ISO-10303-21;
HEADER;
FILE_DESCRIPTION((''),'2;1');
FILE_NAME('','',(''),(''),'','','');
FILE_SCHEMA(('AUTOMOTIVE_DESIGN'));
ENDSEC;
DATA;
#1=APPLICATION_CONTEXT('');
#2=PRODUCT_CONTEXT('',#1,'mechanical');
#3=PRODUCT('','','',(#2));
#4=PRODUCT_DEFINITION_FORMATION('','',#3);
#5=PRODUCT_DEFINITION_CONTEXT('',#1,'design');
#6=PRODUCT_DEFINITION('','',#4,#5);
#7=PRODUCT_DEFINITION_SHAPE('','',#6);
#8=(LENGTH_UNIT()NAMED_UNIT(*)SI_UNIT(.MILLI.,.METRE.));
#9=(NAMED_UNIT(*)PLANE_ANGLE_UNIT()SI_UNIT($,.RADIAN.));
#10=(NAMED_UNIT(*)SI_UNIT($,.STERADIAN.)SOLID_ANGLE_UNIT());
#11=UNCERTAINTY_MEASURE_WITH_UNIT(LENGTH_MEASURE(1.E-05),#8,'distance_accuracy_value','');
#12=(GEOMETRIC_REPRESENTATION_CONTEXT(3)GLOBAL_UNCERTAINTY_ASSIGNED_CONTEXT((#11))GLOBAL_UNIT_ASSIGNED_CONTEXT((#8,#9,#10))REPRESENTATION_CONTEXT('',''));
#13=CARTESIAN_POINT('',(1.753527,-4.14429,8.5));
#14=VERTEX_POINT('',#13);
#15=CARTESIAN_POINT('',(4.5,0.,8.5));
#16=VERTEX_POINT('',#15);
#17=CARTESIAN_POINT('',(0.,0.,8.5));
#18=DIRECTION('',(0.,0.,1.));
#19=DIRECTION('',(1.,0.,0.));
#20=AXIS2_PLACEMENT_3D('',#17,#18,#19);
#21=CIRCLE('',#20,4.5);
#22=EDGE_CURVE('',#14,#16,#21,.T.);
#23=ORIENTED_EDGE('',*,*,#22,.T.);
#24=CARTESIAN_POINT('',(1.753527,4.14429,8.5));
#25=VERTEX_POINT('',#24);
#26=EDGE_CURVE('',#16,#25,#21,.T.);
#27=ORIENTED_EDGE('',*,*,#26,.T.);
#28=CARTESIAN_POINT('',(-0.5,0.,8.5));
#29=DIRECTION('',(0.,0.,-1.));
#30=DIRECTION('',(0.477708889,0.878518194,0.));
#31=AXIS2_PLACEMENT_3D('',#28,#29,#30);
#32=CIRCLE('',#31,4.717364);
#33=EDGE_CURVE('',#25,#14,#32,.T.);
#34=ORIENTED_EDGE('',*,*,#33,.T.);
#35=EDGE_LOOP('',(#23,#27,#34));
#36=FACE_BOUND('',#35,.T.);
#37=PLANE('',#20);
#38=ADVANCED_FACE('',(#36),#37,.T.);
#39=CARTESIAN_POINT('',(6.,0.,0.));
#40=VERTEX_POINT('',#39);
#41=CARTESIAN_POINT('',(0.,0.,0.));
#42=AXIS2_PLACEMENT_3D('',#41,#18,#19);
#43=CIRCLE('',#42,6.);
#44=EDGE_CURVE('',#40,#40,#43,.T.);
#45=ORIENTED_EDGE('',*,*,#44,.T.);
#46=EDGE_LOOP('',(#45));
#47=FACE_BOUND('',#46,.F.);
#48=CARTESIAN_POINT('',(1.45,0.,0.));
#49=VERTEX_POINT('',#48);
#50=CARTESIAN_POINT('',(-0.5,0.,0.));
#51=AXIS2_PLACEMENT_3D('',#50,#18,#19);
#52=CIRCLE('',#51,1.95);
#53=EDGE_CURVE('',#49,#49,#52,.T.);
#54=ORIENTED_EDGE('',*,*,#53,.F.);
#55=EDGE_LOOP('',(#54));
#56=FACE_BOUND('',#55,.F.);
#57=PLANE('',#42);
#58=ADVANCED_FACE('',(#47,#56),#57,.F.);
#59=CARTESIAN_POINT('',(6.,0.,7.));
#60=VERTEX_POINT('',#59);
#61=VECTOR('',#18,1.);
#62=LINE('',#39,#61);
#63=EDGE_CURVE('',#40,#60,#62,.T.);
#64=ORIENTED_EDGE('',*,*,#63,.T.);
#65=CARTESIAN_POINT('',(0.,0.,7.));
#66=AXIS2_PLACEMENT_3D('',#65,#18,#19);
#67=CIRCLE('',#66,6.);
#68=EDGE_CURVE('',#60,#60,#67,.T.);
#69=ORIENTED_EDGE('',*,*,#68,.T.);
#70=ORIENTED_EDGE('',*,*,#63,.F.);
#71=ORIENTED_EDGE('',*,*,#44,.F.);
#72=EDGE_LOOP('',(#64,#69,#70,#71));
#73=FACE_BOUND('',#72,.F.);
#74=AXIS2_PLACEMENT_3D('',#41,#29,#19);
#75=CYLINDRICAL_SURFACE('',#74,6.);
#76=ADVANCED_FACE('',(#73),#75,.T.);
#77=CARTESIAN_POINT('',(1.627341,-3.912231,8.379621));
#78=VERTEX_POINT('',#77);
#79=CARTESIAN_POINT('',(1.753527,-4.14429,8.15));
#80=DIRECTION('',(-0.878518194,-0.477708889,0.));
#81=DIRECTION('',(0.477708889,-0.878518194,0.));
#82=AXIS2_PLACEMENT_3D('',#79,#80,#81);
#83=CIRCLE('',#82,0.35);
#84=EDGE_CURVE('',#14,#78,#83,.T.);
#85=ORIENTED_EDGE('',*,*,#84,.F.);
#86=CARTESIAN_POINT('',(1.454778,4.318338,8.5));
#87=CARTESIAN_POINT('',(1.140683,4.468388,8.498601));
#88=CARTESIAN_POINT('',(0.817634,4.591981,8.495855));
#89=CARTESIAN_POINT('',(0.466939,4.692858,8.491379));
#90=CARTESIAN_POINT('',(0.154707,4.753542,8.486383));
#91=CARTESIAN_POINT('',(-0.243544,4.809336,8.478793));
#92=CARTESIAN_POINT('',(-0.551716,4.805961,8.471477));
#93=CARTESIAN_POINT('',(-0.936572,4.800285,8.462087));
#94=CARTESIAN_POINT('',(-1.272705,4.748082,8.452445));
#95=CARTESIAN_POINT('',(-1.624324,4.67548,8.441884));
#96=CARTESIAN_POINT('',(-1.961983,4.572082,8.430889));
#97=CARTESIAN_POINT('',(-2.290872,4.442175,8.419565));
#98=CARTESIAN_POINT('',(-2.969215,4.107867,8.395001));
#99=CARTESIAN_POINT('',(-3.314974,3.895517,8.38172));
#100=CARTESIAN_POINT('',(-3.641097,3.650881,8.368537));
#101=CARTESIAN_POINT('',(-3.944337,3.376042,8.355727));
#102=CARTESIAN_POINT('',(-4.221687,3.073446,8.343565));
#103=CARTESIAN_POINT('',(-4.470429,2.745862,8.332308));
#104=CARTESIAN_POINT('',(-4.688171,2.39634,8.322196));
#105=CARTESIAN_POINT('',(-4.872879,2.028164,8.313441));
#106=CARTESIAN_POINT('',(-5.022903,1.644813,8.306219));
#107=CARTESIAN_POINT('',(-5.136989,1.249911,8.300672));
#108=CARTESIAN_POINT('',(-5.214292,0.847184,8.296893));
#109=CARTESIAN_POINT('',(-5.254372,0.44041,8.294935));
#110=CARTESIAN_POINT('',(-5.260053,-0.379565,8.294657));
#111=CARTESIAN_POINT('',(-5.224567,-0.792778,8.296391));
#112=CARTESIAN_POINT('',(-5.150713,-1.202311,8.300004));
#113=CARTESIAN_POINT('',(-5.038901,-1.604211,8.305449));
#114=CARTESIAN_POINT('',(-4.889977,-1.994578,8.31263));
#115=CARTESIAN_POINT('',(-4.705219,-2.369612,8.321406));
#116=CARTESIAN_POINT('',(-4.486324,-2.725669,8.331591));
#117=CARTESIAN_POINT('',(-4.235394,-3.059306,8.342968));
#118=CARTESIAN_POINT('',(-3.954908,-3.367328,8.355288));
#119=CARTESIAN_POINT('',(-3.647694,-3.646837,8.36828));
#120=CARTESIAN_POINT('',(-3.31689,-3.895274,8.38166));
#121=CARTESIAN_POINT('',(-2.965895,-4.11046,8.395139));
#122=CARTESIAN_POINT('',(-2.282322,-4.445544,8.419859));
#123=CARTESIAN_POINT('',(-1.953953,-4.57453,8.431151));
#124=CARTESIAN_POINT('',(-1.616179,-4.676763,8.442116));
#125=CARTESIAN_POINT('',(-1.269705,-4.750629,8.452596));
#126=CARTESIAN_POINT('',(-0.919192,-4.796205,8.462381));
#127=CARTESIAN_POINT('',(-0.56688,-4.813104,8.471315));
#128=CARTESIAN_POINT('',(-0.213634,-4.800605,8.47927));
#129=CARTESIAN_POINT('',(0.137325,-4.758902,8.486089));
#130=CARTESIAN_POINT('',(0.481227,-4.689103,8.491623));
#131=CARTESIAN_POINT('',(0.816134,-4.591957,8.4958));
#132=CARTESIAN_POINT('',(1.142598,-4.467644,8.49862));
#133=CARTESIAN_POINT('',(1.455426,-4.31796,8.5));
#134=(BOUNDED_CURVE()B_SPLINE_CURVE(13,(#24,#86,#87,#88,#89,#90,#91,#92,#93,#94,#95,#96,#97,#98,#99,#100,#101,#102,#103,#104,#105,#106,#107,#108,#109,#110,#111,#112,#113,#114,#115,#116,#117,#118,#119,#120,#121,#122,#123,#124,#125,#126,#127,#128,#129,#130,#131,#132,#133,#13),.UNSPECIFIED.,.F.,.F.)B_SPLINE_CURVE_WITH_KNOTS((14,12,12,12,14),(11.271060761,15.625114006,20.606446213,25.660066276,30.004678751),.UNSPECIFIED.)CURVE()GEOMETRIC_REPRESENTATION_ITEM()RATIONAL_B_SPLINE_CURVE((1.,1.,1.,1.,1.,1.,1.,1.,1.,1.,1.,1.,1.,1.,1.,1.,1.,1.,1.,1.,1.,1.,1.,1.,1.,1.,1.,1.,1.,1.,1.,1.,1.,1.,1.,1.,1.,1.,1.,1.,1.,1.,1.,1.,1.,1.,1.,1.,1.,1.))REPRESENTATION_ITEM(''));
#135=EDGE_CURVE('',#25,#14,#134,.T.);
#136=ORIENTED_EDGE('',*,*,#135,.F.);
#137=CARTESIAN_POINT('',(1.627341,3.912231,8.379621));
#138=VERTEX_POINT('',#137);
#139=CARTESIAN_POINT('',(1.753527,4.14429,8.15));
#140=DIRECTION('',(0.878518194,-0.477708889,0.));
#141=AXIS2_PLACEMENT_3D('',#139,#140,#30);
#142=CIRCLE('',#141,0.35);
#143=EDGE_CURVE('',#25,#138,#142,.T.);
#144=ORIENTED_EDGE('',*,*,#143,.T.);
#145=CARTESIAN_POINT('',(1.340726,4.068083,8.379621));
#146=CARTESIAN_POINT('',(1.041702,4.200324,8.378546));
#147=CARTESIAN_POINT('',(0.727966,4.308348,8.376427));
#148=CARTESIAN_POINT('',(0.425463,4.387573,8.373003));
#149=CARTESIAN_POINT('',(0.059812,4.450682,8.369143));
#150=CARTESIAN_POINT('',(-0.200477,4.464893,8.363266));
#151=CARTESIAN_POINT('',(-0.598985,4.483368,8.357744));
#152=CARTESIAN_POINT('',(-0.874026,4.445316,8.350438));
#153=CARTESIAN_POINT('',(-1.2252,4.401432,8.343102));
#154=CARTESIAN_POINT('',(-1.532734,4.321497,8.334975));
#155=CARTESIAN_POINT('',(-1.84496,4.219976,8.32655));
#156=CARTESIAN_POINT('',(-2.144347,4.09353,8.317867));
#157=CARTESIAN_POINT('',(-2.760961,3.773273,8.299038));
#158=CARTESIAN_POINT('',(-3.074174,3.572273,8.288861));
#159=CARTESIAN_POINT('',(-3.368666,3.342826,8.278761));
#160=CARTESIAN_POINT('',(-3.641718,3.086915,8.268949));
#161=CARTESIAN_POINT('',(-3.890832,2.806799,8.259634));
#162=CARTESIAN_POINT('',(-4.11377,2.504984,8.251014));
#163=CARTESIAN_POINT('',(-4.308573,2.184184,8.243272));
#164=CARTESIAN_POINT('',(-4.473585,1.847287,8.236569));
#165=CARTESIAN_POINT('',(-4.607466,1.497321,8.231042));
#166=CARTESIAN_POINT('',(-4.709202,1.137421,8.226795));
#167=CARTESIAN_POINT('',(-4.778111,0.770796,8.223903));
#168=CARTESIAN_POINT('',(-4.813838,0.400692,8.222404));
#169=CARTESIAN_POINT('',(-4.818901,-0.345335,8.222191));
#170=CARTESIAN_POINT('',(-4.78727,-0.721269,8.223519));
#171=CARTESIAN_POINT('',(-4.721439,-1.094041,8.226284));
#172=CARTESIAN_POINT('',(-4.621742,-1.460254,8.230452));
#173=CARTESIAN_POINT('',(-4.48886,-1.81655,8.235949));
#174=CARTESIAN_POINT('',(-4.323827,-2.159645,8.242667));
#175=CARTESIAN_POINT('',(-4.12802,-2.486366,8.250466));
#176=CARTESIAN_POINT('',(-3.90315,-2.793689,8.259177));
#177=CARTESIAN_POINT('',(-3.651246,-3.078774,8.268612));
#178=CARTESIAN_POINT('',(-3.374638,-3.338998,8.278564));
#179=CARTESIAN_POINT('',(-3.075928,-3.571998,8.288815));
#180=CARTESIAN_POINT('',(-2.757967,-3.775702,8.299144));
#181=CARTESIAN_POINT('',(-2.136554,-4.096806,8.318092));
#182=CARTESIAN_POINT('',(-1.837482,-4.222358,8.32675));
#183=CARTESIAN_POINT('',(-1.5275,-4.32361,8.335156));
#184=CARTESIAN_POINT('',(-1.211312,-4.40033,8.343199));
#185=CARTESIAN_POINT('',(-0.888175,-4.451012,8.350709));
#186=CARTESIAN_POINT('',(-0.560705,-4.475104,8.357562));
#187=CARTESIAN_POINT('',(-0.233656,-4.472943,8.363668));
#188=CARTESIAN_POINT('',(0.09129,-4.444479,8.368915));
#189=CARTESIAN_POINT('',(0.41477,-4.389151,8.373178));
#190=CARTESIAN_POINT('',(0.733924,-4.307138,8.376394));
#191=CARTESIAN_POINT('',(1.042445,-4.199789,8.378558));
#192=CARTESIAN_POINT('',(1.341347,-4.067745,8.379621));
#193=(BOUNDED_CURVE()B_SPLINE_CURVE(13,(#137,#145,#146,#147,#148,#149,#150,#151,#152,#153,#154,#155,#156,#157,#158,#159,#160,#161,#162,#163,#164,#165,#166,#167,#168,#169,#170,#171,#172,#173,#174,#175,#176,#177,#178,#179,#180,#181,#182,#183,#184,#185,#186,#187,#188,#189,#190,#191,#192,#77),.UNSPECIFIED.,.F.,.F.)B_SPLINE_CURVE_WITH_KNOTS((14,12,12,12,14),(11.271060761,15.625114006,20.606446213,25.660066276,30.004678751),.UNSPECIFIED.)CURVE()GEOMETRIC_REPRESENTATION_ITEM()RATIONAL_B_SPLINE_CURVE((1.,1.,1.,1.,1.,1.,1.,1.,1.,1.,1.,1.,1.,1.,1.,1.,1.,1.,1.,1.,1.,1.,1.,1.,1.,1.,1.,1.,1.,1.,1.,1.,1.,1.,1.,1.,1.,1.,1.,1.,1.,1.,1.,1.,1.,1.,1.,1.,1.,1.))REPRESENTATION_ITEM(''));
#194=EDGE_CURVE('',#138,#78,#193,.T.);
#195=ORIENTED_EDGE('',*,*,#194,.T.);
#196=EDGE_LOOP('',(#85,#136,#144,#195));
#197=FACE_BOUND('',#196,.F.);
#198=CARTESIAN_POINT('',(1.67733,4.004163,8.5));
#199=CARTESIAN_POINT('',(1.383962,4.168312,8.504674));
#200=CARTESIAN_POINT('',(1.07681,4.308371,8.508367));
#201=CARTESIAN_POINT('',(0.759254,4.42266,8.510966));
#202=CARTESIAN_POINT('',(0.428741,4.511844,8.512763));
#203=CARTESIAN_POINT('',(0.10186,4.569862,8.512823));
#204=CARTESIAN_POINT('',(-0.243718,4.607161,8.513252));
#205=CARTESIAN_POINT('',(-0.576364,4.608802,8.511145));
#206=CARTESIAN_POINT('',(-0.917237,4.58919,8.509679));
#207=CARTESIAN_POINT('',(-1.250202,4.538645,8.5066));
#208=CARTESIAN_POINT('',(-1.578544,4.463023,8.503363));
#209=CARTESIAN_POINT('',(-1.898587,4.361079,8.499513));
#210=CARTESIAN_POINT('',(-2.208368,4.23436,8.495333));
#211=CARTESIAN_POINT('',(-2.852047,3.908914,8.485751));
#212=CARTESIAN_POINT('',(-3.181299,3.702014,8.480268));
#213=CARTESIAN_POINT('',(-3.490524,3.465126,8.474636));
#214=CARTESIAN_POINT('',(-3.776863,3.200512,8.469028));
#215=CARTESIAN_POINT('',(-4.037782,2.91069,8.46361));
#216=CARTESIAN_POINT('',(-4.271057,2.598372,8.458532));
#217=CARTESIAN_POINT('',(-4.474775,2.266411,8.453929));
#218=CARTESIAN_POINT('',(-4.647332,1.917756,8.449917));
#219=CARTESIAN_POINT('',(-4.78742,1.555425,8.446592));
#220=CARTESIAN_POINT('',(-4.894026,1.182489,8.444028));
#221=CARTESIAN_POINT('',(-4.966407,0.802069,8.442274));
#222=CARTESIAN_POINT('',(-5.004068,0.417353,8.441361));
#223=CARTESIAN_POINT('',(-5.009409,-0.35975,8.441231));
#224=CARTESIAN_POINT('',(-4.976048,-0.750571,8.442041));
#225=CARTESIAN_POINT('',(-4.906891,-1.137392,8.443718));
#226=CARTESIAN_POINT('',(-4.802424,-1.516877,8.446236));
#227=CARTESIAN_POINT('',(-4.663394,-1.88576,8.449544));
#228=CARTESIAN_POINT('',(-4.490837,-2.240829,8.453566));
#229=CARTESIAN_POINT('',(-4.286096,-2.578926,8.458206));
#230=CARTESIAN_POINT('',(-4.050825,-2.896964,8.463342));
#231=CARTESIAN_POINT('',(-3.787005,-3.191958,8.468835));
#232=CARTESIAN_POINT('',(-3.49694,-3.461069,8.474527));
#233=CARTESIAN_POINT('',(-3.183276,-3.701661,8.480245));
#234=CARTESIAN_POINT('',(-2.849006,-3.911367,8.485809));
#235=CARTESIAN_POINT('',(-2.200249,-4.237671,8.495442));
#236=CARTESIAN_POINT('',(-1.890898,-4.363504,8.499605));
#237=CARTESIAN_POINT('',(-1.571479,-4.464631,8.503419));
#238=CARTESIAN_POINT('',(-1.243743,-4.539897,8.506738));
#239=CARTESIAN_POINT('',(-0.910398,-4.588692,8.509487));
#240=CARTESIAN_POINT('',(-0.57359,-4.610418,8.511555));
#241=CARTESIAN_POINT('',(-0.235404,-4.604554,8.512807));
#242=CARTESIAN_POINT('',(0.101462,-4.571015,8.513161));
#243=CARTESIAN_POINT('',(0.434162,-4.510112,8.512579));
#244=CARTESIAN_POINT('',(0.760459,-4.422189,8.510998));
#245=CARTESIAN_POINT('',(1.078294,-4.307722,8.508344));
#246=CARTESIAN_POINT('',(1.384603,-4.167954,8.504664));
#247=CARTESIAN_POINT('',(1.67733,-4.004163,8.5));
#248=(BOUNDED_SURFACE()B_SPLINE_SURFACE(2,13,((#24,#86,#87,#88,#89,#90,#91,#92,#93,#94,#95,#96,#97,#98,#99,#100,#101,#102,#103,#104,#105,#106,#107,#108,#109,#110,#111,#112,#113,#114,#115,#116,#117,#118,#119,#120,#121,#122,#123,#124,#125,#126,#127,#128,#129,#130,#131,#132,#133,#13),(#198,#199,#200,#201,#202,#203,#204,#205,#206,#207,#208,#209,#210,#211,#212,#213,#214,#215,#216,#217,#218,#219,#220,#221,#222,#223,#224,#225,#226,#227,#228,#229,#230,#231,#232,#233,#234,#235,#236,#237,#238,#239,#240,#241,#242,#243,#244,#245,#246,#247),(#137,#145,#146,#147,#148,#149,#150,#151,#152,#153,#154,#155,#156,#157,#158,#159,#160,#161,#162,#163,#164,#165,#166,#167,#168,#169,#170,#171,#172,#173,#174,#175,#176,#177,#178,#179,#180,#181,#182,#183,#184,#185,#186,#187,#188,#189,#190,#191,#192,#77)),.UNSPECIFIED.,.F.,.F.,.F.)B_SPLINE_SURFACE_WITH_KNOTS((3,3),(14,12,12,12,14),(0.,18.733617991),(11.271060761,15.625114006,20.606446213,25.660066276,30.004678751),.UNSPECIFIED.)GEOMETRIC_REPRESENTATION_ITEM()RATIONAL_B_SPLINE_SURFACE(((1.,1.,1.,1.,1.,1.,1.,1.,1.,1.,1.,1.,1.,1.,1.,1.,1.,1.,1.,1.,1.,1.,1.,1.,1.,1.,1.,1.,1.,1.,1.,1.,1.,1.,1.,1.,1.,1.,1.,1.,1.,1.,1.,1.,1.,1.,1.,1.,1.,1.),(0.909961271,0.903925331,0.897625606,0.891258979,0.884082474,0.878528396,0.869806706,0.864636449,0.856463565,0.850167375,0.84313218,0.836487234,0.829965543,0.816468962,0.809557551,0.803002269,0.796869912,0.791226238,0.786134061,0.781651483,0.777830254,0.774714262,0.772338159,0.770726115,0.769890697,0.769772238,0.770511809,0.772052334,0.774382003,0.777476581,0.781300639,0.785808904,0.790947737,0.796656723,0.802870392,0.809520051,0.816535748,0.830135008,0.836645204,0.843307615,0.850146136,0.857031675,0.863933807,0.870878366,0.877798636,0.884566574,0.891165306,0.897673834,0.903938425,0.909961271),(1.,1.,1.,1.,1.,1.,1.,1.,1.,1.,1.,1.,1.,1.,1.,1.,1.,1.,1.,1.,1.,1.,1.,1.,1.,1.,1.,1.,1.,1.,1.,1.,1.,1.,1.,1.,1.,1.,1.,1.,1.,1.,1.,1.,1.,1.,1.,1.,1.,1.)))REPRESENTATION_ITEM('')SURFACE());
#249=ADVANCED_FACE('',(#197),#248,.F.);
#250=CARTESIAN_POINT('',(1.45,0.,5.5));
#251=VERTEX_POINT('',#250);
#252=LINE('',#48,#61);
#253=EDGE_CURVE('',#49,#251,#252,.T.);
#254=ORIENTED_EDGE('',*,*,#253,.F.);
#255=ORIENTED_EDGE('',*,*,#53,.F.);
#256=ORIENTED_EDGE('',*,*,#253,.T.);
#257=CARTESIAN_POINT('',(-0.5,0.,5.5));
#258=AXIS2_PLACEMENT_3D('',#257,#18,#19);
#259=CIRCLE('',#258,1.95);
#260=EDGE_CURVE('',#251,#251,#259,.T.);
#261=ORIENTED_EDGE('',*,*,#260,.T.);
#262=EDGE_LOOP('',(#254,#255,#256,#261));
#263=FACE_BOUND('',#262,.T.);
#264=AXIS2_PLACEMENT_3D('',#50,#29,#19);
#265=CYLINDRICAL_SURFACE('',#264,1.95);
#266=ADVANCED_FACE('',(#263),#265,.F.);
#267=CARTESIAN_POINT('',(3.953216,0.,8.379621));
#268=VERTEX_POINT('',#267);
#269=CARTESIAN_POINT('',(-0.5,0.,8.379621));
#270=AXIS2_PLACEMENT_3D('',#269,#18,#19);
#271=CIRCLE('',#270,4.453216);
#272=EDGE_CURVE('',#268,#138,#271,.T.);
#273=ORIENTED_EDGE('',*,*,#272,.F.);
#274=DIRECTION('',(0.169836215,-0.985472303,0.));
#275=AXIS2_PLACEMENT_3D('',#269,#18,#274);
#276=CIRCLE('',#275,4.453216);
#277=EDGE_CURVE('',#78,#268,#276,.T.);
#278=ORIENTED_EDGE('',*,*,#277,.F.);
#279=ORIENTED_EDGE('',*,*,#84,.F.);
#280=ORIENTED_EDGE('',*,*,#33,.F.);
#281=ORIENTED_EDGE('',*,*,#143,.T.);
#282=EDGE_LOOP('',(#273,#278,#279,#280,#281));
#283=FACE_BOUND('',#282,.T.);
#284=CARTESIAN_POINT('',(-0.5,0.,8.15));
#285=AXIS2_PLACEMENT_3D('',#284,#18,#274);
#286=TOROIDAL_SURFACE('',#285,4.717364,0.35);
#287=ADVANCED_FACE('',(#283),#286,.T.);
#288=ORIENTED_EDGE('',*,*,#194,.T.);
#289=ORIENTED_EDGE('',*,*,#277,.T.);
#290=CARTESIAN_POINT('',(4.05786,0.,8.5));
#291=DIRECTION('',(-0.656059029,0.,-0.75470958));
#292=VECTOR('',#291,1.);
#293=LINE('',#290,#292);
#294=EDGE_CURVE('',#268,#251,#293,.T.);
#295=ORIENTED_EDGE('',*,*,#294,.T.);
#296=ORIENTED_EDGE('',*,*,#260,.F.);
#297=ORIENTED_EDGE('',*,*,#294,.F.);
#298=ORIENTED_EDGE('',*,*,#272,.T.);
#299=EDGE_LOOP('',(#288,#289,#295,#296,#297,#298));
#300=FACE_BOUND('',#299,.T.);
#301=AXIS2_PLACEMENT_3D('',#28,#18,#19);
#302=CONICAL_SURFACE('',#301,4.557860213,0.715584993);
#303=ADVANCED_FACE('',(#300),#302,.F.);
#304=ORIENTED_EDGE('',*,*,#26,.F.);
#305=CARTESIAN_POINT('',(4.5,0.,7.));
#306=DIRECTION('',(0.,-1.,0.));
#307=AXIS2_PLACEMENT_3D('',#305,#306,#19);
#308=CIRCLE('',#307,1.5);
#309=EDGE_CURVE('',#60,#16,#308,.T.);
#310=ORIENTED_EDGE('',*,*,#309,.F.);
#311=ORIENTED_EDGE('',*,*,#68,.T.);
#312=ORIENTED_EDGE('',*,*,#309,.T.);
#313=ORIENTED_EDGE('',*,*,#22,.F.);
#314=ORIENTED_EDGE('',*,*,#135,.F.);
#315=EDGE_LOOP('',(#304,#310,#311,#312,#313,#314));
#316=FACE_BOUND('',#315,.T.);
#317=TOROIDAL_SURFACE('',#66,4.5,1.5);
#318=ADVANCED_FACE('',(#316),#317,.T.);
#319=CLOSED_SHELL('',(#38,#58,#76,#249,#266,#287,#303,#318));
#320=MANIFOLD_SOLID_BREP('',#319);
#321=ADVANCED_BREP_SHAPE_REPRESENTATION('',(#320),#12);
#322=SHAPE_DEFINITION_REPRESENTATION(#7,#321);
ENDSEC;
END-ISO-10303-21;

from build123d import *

# Parameters (mm, degrees)
F0_R     = 6
F0_R_2   = 1.95
F1_DEPTH = 8.5
F2_R     = 1.5
F4_R     = 0.35


# Not quite as in the source:
# - a fillet or chamfer that OpenCascade refuses, or shapes differently, is made with other operations: its cross-section is extruded or revolved along the edge and cut away or added


with BuildPart() as f1:
    # F0 (on Top) → F1 (new body)
    with BuildSketch(Plane.XY):
        Circle(F0_R)
        with Locations((-0.5, 0)):
            Circle(F0_R_2, mode=Mode.SUBTRACT)
    extrude(amount=F1_DEPTH)

    # F2
    f2_edges = [f1.edges().sort_by_distance(p)[0] for p in [
        (-6, 0, 8.5),
    ]]
    fillet(f2_edges, radius=F2_R)

    # F3: chamfer of 3 x 2.6078602134 on 1 edges, made by hand

    # F3_s1 → F3_t2 (revolve, cut)
    with BuildSketch(Plane.XZ):
        Polygon((4.0578602134, 8.5), (1.45, 5.5), (1.45, 8.5), align=None)
    revolve(axis=Axis((-0.5, 0, 8.5), (0, 0, 1)), mode=Mode.SUBTRACT)

    # F4
    f4_edges = [f1.edges().sort_by_distance(p)[0] for p in [
        (2.985849, -2.936486, 8.5),
        (2.985849, 2.936486, 8.5),
        (-4.987173, -4e-06, 8.418683),
    ]]
    fillet(f4_edges, radius=F4_R)


solid = f1.part
